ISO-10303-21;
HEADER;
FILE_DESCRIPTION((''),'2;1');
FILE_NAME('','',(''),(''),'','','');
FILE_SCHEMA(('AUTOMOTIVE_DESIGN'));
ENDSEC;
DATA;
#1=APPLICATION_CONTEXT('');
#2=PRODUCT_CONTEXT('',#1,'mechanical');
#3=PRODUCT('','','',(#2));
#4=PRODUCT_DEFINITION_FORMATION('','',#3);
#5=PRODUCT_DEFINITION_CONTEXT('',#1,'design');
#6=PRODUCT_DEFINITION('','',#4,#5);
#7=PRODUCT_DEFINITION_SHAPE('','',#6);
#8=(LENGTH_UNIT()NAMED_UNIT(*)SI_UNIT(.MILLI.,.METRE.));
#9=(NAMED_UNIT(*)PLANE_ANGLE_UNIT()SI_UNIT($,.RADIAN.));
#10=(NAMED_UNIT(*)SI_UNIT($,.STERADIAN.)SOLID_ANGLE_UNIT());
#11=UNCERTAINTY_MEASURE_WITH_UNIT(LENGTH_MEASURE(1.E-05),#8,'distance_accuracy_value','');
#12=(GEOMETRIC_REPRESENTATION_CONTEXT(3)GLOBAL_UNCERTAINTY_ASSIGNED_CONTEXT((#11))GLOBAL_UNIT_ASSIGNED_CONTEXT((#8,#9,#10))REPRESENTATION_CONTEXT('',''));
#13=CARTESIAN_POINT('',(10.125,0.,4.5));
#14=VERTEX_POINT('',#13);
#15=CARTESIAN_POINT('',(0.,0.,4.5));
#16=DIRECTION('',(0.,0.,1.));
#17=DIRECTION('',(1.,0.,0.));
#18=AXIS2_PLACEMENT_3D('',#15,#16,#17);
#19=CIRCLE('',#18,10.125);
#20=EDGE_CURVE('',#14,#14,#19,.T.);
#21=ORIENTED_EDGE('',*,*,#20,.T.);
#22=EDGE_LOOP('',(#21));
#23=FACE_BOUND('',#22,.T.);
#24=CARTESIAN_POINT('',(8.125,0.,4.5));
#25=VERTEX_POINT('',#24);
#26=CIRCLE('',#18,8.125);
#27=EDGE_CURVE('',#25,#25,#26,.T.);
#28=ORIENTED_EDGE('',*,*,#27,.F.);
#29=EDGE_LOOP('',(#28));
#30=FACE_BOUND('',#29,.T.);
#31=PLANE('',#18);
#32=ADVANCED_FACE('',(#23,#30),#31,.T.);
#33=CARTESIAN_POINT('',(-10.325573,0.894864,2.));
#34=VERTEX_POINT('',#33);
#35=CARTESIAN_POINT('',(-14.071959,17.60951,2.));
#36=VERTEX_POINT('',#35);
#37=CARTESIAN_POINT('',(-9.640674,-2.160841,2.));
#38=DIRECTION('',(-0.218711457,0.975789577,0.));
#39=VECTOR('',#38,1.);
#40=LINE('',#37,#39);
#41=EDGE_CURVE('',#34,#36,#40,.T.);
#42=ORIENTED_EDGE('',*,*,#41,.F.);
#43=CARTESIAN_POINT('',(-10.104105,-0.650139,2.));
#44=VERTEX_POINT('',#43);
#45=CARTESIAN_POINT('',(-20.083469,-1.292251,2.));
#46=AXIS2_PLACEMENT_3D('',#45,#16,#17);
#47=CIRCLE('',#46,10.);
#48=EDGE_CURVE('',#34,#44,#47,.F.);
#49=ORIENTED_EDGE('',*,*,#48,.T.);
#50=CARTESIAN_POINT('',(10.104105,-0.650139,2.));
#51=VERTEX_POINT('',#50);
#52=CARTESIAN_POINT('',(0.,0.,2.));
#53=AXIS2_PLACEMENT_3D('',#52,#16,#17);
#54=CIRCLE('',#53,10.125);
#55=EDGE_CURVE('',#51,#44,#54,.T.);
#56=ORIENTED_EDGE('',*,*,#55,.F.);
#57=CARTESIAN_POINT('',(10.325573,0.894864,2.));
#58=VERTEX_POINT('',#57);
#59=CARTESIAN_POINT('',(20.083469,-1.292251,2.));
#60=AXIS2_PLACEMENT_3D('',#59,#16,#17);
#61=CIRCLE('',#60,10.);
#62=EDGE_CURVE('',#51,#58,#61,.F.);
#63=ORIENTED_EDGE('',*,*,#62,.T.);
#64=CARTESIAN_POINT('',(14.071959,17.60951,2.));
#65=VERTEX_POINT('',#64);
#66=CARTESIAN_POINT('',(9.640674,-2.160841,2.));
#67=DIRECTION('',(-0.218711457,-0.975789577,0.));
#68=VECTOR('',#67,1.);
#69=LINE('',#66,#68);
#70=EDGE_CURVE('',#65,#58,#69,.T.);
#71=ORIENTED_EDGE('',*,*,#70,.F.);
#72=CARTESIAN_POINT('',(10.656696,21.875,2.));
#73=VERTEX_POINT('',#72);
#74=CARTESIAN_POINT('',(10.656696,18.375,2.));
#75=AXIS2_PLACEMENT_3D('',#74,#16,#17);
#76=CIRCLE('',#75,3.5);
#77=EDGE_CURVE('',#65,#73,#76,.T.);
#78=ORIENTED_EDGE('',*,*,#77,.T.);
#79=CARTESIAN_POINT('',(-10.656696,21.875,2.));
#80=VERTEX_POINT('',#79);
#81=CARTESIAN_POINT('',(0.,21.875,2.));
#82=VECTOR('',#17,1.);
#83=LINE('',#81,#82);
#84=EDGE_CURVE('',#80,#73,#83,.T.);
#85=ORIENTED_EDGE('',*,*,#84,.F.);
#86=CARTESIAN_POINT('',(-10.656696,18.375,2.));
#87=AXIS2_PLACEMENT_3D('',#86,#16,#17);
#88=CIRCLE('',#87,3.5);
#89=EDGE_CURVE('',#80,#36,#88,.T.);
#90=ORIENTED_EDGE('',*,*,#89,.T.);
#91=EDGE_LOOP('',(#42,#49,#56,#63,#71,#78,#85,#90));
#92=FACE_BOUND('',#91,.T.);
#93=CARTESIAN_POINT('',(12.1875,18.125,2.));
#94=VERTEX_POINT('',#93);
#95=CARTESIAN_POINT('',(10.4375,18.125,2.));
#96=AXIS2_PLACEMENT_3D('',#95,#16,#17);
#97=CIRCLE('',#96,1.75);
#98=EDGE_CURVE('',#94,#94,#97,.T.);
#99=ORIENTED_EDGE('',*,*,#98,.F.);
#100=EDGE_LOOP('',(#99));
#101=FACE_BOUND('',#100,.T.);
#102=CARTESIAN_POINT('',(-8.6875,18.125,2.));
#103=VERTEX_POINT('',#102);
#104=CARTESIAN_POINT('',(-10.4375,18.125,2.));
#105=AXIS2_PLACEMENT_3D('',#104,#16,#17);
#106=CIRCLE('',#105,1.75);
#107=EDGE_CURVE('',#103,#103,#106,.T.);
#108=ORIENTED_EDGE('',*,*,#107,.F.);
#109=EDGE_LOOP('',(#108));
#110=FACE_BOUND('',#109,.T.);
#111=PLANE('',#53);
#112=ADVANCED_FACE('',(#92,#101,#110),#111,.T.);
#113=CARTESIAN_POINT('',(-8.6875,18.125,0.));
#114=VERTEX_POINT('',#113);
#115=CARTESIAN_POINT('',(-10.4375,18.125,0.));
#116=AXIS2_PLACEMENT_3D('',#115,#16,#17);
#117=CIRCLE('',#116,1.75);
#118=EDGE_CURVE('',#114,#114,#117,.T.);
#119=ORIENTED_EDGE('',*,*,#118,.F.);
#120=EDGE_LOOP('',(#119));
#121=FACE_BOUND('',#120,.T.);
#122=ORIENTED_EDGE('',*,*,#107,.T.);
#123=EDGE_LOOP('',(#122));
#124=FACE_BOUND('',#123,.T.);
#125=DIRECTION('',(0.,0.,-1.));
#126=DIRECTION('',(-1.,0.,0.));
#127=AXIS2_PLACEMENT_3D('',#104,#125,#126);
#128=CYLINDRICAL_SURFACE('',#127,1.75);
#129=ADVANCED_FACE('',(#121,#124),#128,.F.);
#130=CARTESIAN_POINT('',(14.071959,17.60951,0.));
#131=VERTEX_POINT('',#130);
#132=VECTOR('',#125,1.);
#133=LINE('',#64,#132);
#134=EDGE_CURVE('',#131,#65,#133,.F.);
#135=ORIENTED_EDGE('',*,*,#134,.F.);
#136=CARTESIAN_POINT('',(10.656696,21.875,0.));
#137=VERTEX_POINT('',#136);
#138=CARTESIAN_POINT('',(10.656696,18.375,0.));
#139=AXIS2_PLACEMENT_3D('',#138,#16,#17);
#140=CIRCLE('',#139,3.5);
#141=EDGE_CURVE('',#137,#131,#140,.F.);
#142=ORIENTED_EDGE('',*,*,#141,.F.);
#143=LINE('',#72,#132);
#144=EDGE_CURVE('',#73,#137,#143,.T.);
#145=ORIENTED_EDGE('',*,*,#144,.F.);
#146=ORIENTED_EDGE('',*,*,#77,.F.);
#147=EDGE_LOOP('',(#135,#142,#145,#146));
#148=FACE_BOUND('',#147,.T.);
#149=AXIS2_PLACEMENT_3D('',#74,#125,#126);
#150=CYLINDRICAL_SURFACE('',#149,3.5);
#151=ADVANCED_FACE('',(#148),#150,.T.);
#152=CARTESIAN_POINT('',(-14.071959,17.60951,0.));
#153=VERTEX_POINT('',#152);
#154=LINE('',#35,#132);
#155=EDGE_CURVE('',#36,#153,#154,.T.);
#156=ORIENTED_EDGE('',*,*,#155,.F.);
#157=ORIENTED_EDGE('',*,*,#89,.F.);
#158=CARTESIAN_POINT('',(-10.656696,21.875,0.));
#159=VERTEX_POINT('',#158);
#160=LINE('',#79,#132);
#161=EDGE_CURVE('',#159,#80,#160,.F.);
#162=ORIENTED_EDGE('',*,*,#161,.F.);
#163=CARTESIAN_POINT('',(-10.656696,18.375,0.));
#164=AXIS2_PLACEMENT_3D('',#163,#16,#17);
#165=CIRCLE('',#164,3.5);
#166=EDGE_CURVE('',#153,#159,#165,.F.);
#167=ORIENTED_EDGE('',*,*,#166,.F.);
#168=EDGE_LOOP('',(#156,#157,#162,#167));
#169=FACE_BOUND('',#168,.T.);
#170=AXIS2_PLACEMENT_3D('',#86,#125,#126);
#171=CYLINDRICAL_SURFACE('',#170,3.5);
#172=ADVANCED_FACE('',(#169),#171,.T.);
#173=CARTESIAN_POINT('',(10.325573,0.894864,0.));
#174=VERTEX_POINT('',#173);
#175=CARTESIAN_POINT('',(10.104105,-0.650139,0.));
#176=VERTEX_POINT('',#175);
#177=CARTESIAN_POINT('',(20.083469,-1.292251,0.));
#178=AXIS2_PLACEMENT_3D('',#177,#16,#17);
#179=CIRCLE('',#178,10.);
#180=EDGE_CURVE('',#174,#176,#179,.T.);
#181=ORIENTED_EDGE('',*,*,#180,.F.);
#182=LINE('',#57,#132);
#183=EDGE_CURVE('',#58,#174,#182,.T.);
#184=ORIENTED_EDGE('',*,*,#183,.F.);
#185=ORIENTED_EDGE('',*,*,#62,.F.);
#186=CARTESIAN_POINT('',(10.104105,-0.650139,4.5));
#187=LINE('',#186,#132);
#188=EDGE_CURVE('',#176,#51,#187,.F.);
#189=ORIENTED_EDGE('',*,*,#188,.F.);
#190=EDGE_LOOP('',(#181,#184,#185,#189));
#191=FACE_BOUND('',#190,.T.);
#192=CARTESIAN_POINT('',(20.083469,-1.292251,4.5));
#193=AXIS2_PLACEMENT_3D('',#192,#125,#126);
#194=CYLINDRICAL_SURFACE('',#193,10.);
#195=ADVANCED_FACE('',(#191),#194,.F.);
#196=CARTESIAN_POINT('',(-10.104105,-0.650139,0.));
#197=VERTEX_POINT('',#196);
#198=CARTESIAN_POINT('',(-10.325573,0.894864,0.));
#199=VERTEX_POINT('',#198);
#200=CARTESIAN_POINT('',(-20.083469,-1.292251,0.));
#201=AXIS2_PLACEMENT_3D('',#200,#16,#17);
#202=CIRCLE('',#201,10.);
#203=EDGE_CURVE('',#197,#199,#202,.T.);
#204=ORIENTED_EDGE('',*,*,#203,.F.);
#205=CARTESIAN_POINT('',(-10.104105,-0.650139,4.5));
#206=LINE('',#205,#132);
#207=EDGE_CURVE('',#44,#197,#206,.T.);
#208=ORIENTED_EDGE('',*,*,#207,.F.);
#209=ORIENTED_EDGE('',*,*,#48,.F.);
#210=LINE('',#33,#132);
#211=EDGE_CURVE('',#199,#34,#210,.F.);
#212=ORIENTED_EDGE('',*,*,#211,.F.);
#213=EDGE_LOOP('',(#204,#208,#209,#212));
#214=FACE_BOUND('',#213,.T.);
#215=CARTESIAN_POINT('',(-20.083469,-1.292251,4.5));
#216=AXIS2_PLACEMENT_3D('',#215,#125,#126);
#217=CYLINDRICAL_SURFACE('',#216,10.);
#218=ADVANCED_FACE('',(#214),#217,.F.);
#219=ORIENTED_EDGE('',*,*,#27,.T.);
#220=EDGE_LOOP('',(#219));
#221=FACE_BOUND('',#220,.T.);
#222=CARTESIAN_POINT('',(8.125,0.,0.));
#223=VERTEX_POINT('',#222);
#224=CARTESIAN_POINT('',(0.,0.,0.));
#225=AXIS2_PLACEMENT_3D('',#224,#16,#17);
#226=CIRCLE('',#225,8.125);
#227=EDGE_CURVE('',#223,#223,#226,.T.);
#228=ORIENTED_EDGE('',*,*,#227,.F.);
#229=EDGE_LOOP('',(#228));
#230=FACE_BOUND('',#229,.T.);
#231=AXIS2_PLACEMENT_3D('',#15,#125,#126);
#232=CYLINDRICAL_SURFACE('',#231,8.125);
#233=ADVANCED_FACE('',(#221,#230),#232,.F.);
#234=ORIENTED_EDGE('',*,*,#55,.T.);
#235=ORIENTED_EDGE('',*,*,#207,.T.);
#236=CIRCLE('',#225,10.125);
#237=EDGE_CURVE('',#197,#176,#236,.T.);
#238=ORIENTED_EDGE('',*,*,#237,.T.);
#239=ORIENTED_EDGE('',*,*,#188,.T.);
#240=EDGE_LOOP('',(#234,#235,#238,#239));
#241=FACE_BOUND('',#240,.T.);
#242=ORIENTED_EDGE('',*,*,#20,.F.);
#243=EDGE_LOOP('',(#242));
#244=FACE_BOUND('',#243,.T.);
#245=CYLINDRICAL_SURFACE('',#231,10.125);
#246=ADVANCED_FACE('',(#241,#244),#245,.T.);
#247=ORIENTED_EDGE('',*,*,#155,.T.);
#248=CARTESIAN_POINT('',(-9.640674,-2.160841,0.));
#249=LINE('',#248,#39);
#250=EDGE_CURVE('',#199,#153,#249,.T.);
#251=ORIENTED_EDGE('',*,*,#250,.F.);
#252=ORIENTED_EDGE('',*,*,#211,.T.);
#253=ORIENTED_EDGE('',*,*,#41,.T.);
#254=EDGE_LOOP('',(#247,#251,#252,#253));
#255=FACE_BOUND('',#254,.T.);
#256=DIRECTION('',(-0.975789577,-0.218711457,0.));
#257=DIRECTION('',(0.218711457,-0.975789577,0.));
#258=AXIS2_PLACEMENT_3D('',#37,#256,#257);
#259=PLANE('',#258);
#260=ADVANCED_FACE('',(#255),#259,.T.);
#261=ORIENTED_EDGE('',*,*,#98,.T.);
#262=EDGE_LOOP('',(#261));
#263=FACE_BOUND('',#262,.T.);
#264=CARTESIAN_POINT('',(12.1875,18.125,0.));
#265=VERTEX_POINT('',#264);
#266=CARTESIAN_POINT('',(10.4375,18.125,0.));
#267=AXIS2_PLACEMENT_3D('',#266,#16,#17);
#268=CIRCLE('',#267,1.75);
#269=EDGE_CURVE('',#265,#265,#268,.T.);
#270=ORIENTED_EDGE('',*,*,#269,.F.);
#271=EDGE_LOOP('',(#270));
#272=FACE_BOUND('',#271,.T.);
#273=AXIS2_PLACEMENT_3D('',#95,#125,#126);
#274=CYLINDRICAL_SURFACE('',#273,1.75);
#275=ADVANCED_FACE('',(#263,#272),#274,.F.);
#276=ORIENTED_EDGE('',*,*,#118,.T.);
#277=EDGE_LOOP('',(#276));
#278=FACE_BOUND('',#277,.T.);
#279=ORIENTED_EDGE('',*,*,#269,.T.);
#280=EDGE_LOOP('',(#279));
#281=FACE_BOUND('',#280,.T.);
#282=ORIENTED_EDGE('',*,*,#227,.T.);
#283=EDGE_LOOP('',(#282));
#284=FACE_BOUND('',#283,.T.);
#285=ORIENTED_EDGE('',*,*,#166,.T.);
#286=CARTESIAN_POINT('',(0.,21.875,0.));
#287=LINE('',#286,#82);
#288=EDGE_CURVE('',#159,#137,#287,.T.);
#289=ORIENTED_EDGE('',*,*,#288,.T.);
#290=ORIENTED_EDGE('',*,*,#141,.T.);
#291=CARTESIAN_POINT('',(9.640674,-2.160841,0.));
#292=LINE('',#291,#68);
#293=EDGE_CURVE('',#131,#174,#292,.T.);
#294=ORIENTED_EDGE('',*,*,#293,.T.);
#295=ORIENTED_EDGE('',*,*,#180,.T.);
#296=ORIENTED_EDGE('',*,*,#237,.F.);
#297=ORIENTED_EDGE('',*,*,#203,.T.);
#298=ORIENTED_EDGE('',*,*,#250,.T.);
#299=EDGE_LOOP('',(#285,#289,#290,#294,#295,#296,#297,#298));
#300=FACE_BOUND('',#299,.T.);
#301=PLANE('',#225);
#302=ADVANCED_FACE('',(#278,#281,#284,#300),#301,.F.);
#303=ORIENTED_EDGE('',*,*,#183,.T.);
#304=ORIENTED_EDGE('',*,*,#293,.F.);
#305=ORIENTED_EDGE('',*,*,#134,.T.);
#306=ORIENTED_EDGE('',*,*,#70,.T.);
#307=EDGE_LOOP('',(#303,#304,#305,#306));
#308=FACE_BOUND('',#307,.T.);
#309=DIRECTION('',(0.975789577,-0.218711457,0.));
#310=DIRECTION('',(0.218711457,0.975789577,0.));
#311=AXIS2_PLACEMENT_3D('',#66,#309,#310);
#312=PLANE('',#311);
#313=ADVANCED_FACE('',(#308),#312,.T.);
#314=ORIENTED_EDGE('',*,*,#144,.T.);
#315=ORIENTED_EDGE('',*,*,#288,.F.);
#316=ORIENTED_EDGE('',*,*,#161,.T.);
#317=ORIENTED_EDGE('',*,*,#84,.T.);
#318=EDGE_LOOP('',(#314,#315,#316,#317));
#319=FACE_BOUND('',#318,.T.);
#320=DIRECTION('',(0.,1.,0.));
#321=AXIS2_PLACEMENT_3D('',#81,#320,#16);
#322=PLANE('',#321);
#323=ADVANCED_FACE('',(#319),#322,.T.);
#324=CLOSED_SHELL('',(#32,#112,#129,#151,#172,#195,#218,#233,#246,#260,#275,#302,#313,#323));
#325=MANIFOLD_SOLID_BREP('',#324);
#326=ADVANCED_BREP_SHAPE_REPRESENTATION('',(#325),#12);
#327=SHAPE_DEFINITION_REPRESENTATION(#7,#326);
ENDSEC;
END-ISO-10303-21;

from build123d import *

# Parameters (mm, degrees)
ESQUISSE1_R        = 10.125
ESQUISSE1_R_2      = 8.125
BOSS_EXTRU_1_DEPTH = 4.5
ESQUISSE1_3_R      = 1.75
BOSS_EXTRU_2_DEPTH = 2
CONG_1_R           = 3.5
CONG_2_R           = 10


with BuildPart() as part:
    # Esquisse1 → Boss.-Extru.1 (new body)
    with BuildSketch(Plane.XY):
        Circle(ESQUISSE1_R)
        Circle(ESQUISSE1_R_2, mode=Mode.SUBTRACT)
    extrude(amount=BOSS_EXTRU_1_DEPTH)

    # Esquisse1<3> → Boss.-Extru.2 (add)
    with BuildSketch(Plane.XY):
        with BuildLine():
            Line((-15.028017241, 21.875), (-10.125, 0))
            ThreePointArc((-10.125, 0), (0, 10.125), (10.125, 0))
            Line((10.125, 0), (15.028017241, 21.875))
            Line((15.028017241, 21.875), (-15.028017241, 21.875))
        make_face()
        with Locations((-10.4375, 18.125)):
            Circle(ESQUISSE1_3_R, mode=Mode.SUBTRACT)
        with Locations((10.4375, 18.125)):
            Circle(ESQUISSE1_3_R, mode=Mode.SUBTRACT)
    extrude(amount=BOSS_EXTRU_2_DEPTH)

    # Congé1
    cong_1_edges = [part.edges().sort_by_distance(p)[0] for p in [
        (15.028017241, 21.875, 1),
        (-15.028017241, 21.875, 1),
    ]]
    fillet(cong_1_edges, radius=CONG_1_R)

    # Congé2
    # the kernel refuses this fillet: 10 mm, written as the material it adds along each edge
    with BuildSketch(Plane(origin=(-10.125, 0, 0), x_dir=(0.03212219246103637, -0.9994839492215452, 0), z_dir=(0, 0, 1))) as cong_2_piece_1:
        with BuildLine():
            CenterArc((0.971696322, -9.994839492), CONG_2_R, 91.840782713, 8.951796508)
            Line((-0.900844579, -0.171724377), (0, 0))
            ThreePointArc((0, 0), (0.325237199, -0.005225014), (0.650474397, 0))
        make_face()
    extrude(amount=2)
    with BuildSketch(Plane(origin=(10.125, 0, 0), x_dir=(0.21871145691738353, 0.9757895770160058, 0), z_dir=(0, 0, 1))) as cong_2_piece_2:
        with BuildLine():
            CenterArc((0.917066092, -10), CONG_2_R, 90, 8.951796508)
            ThreePointArc((-0.638968488, -0.121803991), (-0.318505839, -0.066034587), (0, 0))
            Line((0, 0), (0.917066092, 0))
        make_face()
    extrude(amount=2)


solid = part.part
